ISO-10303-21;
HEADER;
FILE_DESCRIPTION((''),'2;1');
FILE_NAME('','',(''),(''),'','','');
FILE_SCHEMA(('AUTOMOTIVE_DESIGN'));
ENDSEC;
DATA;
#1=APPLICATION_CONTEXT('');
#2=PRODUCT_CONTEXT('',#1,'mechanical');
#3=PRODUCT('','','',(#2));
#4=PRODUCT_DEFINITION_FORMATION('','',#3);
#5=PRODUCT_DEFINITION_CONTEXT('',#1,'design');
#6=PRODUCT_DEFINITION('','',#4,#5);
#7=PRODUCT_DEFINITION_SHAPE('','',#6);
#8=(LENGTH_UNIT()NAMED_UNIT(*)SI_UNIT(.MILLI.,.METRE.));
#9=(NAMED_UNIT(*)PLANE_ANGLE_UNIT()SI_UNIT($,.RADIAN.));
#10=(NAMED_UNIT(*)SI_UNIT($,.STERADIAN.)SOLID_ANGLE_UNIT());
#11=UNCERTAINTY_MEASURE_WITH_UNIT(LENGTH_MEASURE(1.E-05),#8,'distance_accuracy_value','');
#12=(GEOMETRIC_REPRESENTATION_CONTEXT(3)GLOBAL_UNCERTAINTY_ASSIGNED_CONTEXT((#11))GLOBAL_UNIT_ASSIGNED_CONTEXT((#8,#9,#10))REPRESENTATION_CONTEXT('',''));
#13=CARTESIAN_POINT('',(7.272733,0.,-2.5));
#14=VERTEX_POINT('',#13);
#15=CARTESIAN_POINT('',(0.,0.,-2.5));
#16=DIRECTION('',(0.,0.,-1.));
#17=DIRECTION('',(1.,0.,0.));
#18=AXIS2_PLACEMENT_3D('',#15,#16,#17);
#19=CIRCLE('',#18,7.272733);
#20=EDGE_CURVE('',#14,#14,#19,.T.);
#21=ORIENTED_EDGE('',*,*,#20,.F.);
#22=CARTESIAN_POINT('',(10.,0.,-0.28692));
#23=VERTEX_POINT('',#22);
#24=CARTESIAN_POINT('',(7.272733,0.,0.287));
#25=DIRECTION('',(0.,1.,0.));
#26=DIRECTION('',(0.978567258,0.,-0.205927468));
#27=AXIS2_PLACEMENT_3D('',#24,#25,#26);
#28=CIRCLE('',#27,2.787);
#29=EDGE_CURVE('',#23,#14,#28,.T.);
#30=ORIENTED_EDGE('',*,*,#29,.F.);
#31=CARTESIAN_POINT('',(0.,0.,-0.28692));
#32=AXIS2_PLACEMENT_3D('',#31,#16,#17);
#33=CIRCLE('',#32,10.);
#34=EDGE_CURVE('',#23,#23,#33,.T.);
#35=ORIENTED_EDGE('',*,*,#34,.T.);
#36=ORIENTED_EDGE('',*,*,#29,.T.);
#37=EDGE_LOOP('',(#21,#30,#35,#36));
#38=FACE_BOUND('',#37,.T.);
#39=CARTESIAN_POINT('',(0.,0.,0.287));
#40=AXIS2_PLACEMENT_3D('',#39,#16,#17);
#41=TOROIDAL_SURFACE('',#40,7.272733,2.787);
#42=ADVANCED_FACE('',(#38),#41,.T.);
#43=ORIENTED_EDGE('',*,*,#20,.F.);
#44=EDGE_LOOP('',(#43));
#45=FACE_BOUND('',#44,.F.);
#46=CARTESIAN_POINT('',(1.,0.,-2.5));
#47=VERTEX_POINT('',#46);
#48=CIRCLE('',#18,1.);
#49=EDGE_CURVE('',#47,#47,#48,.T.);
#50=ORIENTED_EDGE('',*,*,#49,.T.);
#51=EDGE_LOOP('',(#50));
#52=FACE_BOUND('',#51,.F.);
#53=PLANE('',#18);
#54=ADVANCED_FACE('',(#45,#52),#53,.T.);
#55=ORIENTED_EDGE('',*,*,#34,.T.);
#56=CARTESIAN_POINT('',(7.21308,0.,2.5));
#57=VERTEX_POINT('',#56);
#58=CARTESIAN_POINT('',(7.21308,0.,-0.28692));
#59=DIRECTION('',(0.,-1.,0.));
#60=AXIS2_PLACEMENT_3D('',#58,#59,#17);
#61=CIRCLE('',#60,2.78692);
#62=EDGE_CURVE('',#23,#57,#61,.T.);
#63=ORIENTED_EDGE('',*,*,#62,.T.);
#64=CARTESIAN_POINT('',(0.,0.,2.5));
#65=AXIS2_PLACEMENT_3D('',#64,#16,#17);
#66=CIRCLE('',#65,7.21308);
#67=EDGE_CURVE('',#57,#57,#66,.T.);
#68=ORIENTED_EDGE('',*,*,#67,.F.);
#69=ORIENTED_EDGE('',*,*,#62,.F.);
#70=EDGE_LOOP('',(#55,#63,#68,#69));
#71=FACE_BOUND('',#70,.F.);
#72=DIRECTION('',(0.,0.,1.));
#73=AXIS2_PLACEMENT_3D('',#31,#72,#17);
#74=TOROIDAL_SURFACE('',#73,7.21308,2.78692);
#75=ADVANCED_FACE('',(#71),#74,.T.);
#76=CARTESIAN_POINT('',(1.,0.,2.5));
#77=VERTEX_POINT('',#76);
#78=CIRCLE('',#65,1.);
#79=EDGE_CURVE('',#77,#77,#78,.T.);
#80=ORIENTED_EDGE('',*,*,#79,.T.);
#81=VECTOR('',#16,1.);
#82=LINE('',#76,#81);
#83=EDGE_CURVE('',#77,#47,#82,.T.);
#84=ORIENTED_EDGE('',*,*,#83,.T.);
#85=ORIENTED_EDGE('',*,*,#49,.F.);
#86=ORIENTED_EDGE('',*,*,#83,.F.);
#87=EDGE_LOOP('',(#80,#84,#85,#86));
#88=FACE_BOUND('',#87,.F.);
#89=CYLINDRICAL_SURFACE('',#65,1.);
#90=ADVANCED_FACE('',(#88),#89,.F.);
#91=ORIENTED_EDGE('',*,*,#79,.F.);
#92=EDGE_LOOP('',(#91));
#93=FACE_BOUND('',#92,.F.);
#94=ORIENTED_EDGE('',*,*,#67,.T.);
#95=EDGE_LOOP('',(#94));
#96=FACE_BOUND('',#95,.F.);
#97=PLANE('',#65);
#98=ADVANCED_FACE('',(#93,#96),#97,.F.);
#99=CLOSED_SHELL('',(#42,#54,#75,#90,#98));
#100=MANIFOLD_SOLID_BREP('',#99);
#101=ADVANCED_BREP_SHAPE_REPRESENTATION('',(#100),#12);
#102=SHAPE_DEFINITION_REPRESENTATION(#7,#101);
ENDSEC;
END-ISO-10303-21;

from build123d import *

# Parameters (mm, degrees)
F2_R = 2.7869198521


# Not quite as in the source:
# - a fillet or chamfer that OpenCascade refuses, or shapes differently, is made with other operations: its cross-section is extruded or revolved along the edge and cut away or added


with BuildPart() as f1:
    # F0 (on Front) → F1 (revolve)
    with BuildSketch(Plane.XZ):
        Polygon((8.5, -2.5), (10, -2.5), (10, 2.5), (8.5, 2.5), (1, 2.5), (1, -2.5), align=None)
    revolve(axis=Axis((0, 0, 0), (0, 0, -1)))

    # F2
    f2_edges = [f1.edges().sort_by_distance(p)[0] for p in [
        (-10, 0, 2.5),
    ]]
    fillet(f2_edges, radius=F2_R)

    # F3: fillet of radius 2.787 on 1 edges, made by hand

    # F3_s1 → F3_t2 (revolve, cut)
    with BuildSketch(Plane.XZ):
        with BuildLine():
            ThreePointArc((10, -0.2869198521), (9.0288444344, -1.8771261086), (7.2727330524, -2.5))
            Line((7.2727330524, -2.5), (10, -2.5))
            Line((10, -2.5), (10, -0.2869198521))
        make_face()
    revolve(axis=Axis((0, 0, -2.5), (0, 0, -1)), mode=Mode.SUBTRACT)


solid = f1.part
